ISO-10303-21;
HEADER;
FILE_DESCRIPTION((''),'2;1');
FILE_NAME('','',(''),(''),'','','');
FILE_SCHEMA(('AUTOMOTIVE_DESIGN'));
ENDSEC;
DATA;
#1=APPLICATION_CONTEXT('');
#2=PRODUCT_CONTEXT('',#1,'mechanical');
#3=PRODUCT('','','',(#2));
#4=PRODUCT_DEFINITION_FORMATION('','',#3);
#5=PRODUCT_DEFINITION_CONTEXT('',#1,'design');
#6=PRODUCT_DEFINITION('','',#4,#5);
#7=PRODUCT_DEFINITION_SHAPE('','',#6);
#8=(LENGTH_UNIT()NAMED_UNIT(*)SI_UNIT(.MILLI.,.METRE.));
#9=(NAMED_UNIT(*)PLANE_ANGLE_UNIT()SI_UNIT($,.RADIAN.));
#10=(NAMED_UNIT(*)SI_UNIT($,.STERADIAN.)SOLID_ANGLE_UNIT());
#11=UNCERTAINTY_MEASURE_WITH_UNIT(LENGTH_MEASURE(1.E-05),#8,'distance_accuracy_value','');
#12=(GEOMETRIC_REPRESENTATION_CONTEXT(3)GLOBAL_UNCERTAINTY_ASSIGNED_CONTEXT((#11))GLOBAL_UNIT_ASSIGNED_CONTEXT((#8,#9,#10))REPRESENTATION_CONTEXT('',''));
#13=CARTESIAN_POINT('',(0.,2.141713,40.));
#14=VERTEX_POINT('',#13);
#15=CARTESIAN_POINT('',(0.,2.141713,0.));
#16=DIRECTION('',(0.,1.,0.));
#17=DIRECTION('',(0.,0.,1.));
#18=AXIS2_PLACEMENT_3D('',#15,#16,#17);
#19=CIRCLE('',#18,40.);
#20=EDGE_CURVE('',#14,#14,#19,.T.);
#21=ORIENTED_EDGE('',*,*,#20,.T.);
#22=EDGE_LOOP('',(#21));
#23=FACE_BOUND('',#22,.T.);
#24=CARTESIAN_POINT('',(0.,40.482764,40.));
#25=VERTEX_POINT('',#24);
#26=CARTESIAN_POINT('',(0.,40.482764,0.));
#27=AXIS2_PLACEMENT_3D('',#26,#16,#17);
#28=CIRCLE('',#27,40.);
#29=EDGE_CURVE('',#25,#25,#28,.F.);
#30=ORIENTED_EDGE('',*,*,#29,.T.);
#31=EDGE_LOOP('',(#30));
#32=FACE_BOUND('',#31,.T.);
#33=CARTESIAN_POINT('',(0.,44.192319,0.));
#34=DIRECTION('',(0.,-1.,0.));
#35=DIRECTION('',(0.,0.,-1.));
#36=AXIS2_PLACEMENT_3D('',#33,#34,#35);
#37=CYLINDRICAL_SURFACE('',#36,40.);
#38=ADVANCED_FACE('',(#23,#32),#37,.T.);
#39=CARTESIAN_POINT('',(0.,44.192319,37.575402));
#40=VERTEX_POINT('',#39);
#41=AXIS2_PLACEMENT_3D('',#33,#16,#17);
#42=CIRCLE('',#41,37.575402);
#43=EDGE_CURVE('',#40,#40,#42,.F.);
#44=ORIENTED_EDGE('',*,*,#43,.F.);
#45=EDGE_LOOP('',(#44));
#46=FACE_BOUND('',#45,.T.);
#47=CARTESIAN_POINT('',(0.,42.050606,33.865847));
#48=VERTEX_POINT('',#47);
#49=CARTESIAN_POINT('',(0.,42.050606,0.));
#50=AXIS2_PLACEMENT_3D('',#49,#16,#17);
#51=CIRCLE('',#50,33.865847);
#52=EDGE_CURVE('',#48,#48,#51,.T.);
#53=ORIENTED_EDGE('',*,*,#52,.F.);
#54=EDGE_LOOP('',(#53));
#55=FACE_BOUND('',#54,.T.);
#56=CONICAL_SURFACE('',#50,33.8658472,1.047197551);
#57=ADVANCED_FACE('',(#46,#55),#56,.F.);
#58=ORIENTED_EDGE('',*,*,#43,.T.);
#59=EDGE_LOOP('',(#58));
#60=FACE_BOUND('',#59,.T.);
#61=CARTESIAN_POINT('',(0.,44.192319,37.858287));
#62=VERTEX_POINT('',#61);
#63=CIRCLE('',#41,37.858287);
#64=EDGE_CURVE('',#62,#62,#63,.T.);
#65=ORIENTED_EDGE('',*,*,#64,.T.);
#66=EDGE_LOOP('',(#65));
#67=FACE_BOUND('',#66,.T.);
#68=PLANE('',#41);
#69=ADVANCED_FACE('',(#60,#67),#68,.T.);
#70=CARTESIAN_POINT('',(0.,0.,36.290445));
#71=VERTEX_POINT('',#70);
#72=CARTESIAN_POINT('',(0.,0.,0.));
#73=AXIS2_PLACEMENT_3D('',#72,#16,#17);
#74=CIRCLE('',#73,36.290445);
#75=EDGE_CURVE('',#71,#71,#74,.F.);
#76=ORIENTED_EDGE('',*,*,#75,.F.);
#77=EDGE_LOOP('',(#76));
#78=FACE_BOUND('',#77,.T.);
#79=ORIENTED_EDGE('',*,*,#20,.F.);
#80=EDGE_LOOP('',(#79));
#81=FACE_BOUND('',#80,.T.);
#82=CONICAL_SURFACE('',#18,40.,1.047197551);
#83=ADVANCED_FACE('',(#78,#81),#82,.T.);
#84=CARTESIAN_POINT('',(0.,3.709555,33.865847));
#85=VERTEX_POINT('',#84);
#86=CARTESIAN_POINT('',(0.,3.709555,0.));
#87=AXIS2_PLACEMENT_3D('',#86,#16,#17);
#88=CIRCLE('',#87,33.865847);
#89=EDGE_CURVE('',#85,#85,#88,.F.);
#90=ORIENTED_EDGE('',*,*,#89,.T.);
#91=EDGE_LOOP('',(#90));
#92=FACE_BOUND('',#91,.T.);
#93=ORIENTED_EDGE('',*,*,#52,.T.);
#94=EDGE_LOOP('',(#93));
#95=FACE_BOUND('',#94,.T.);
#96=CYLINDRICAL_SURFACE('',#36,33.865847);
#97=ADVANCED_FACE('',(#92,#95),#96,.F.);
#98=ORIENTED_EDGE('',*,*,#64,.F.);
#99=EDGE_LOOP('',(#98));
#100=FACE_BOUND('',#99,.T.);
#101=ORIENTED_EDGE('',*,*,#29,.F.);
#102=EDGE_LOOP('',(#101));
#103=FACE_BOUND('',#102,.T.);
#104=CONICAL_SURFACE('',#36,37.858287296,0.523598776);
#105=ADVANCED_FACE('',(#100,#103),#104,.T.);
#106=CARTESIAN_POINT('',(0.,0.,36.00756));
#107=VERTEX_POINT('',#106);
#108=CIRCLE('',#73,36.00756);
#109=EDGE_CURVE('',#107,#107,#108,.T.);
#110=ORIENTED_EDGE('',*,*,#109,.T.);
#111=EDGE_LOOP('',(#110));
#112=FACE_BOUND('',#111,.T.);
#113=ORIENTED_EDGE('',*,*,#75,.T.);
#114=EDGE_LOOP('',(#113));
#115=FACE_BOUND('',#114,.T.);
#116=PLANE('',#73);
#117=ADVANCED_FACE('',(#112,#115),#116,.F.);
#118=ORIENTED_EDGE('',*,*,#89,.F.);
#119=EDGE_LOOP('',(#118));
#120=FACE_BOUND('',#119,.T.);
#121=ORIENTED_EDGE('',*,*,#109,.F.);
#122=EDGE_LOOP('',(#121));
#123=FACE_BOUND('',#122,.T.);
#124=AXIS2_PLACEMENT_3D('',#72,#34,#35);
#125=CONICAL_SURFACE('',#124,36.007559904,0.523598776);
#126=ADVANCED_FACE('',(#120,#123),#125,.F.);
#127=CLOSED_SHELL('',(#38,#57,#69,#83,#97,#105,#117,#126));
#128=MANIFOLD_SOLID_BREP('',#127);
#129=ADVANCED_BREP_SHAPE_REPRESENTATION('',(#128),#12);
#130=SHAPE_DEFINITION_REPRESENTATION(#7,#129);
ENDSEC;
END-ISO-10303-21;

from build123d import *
from OCP.BRepFilletAPI import BRepFilletAPI_MakeChamfer

# Parameters (mm, degrees)
SKETCH1_R           = 40
BOSS_EXTRUDE1_DEPTH = 44.192319107
SKETCH2_R           = 33.8658472
CUT_EXTRUDE1_DEPTH  = 72.784128246
CHAMFER1_SIZE       = 3.709555218
CHAMFER1_SIZE2      = 2.141712704


with BuildPart() as part:
    # Sketch1 → Boss-Extrude1 (new body)
    with BuildSketch(Plane(origin=(0, 0, 0), x_dir=(1, 0, 0), z_dir=(0, 1, 0))):
        Circle(SKETCH1_R)
    extrude(amount=BOSS_EXTRUDE1_DEPTH)

    # Sketch2 → Cut-Extrude1 (cut, through all)
    with BuildSketch(Plane(origin=(0, 0, 0), x_dir=(1, 0, 0), z_dir=(0, 1, 0))):
        Circle(SKETCH2_R)
    extrude(amount=CUT_EXTRUDE1_DEPTH, mode=Mode.SUBTRACT)

    # Chamfer1: one chamfer whose edges measure the first distance from different faces: ONE call of the kernel's chamfer builder (chamfer() names one face for all edges)
    chamfer1_edges_1 = [part.edges().sort_by_distance(p)[0] for p in [
        (-33.8658472, 44.192319107, 0),
    ]]
    chamfer1_side_1 = [part.faces().sort_by_distance(p)[0] for p in [
        (-38.86862915, 44.192319107, 0),
    ]]
    chamfer1_edges_2 = [part.edges().sort_by_distance(p)[0] for p in [
        (-33.8658472, 0, 0),
    ]]
    chamfer1_side_2 = [part.faces().sort_by_distance(p)[0] for p in [
        (-33.8658472, 22.096159554, 0),
    ]]
    chamfer1_edges_3 = [part.edges().sort_by_distance(p)[0] for p in [
        (-40, 0, 0),
    ]]
    chamfer1_side_3 = [part.faces().sort_by_distance(p)[0] for p in [
        (-38.86862915, 0, 0),
    ]]
    chamfer1_edges_4 = [part.edges().sort_by_distance(p)[0] for p in [
        (-40, 44.192319107, 0),
    ]]
    chamfer1_side_4 = [part.faces().sort_by_distance(p)[0] for p in [
        (-40, 22.096159554, 0),
    ]]
    chamfer1 = BRepFilletAPI_MakeChamfer(part.part.solid().wrapped)
    for e in chamfer1_edges_1:
        chamfer1.Add(CHAMFER1_SIZE, CHAMFER1_SIZE2, e.wrapped, chamfer1_side_1[0].wrapped)  # the first distance lies on this face
    for e in chamfer1_edges_2:
        chamfer1.Add(CHAMFER1_SIZE, CHAMFER1_SIZE2, e.wrapped, chamfer1_side_2[0].wrapped)  # the first distance lies on this face
    for e in chamfer1_edges_3:
        chamfer1.Add(CHAMFER1_SIZE, CHAMFER1_SIZE2, e.wrapped, chamfer1_side_3[0].wrapped)  # the first distance lies on this face
    for e in chamfer1_edges_4:
        chamfer1.Add(CHAMFER1_SIZE, CHAMFER1_SIZE2, e.wrapped, chamfer1_side_4[0].wrapped)  # the first distance lies on this face
    add(Compound.cast(chamfer1.Shape()), mode=Mode.REPLACE)


solid = part.part
